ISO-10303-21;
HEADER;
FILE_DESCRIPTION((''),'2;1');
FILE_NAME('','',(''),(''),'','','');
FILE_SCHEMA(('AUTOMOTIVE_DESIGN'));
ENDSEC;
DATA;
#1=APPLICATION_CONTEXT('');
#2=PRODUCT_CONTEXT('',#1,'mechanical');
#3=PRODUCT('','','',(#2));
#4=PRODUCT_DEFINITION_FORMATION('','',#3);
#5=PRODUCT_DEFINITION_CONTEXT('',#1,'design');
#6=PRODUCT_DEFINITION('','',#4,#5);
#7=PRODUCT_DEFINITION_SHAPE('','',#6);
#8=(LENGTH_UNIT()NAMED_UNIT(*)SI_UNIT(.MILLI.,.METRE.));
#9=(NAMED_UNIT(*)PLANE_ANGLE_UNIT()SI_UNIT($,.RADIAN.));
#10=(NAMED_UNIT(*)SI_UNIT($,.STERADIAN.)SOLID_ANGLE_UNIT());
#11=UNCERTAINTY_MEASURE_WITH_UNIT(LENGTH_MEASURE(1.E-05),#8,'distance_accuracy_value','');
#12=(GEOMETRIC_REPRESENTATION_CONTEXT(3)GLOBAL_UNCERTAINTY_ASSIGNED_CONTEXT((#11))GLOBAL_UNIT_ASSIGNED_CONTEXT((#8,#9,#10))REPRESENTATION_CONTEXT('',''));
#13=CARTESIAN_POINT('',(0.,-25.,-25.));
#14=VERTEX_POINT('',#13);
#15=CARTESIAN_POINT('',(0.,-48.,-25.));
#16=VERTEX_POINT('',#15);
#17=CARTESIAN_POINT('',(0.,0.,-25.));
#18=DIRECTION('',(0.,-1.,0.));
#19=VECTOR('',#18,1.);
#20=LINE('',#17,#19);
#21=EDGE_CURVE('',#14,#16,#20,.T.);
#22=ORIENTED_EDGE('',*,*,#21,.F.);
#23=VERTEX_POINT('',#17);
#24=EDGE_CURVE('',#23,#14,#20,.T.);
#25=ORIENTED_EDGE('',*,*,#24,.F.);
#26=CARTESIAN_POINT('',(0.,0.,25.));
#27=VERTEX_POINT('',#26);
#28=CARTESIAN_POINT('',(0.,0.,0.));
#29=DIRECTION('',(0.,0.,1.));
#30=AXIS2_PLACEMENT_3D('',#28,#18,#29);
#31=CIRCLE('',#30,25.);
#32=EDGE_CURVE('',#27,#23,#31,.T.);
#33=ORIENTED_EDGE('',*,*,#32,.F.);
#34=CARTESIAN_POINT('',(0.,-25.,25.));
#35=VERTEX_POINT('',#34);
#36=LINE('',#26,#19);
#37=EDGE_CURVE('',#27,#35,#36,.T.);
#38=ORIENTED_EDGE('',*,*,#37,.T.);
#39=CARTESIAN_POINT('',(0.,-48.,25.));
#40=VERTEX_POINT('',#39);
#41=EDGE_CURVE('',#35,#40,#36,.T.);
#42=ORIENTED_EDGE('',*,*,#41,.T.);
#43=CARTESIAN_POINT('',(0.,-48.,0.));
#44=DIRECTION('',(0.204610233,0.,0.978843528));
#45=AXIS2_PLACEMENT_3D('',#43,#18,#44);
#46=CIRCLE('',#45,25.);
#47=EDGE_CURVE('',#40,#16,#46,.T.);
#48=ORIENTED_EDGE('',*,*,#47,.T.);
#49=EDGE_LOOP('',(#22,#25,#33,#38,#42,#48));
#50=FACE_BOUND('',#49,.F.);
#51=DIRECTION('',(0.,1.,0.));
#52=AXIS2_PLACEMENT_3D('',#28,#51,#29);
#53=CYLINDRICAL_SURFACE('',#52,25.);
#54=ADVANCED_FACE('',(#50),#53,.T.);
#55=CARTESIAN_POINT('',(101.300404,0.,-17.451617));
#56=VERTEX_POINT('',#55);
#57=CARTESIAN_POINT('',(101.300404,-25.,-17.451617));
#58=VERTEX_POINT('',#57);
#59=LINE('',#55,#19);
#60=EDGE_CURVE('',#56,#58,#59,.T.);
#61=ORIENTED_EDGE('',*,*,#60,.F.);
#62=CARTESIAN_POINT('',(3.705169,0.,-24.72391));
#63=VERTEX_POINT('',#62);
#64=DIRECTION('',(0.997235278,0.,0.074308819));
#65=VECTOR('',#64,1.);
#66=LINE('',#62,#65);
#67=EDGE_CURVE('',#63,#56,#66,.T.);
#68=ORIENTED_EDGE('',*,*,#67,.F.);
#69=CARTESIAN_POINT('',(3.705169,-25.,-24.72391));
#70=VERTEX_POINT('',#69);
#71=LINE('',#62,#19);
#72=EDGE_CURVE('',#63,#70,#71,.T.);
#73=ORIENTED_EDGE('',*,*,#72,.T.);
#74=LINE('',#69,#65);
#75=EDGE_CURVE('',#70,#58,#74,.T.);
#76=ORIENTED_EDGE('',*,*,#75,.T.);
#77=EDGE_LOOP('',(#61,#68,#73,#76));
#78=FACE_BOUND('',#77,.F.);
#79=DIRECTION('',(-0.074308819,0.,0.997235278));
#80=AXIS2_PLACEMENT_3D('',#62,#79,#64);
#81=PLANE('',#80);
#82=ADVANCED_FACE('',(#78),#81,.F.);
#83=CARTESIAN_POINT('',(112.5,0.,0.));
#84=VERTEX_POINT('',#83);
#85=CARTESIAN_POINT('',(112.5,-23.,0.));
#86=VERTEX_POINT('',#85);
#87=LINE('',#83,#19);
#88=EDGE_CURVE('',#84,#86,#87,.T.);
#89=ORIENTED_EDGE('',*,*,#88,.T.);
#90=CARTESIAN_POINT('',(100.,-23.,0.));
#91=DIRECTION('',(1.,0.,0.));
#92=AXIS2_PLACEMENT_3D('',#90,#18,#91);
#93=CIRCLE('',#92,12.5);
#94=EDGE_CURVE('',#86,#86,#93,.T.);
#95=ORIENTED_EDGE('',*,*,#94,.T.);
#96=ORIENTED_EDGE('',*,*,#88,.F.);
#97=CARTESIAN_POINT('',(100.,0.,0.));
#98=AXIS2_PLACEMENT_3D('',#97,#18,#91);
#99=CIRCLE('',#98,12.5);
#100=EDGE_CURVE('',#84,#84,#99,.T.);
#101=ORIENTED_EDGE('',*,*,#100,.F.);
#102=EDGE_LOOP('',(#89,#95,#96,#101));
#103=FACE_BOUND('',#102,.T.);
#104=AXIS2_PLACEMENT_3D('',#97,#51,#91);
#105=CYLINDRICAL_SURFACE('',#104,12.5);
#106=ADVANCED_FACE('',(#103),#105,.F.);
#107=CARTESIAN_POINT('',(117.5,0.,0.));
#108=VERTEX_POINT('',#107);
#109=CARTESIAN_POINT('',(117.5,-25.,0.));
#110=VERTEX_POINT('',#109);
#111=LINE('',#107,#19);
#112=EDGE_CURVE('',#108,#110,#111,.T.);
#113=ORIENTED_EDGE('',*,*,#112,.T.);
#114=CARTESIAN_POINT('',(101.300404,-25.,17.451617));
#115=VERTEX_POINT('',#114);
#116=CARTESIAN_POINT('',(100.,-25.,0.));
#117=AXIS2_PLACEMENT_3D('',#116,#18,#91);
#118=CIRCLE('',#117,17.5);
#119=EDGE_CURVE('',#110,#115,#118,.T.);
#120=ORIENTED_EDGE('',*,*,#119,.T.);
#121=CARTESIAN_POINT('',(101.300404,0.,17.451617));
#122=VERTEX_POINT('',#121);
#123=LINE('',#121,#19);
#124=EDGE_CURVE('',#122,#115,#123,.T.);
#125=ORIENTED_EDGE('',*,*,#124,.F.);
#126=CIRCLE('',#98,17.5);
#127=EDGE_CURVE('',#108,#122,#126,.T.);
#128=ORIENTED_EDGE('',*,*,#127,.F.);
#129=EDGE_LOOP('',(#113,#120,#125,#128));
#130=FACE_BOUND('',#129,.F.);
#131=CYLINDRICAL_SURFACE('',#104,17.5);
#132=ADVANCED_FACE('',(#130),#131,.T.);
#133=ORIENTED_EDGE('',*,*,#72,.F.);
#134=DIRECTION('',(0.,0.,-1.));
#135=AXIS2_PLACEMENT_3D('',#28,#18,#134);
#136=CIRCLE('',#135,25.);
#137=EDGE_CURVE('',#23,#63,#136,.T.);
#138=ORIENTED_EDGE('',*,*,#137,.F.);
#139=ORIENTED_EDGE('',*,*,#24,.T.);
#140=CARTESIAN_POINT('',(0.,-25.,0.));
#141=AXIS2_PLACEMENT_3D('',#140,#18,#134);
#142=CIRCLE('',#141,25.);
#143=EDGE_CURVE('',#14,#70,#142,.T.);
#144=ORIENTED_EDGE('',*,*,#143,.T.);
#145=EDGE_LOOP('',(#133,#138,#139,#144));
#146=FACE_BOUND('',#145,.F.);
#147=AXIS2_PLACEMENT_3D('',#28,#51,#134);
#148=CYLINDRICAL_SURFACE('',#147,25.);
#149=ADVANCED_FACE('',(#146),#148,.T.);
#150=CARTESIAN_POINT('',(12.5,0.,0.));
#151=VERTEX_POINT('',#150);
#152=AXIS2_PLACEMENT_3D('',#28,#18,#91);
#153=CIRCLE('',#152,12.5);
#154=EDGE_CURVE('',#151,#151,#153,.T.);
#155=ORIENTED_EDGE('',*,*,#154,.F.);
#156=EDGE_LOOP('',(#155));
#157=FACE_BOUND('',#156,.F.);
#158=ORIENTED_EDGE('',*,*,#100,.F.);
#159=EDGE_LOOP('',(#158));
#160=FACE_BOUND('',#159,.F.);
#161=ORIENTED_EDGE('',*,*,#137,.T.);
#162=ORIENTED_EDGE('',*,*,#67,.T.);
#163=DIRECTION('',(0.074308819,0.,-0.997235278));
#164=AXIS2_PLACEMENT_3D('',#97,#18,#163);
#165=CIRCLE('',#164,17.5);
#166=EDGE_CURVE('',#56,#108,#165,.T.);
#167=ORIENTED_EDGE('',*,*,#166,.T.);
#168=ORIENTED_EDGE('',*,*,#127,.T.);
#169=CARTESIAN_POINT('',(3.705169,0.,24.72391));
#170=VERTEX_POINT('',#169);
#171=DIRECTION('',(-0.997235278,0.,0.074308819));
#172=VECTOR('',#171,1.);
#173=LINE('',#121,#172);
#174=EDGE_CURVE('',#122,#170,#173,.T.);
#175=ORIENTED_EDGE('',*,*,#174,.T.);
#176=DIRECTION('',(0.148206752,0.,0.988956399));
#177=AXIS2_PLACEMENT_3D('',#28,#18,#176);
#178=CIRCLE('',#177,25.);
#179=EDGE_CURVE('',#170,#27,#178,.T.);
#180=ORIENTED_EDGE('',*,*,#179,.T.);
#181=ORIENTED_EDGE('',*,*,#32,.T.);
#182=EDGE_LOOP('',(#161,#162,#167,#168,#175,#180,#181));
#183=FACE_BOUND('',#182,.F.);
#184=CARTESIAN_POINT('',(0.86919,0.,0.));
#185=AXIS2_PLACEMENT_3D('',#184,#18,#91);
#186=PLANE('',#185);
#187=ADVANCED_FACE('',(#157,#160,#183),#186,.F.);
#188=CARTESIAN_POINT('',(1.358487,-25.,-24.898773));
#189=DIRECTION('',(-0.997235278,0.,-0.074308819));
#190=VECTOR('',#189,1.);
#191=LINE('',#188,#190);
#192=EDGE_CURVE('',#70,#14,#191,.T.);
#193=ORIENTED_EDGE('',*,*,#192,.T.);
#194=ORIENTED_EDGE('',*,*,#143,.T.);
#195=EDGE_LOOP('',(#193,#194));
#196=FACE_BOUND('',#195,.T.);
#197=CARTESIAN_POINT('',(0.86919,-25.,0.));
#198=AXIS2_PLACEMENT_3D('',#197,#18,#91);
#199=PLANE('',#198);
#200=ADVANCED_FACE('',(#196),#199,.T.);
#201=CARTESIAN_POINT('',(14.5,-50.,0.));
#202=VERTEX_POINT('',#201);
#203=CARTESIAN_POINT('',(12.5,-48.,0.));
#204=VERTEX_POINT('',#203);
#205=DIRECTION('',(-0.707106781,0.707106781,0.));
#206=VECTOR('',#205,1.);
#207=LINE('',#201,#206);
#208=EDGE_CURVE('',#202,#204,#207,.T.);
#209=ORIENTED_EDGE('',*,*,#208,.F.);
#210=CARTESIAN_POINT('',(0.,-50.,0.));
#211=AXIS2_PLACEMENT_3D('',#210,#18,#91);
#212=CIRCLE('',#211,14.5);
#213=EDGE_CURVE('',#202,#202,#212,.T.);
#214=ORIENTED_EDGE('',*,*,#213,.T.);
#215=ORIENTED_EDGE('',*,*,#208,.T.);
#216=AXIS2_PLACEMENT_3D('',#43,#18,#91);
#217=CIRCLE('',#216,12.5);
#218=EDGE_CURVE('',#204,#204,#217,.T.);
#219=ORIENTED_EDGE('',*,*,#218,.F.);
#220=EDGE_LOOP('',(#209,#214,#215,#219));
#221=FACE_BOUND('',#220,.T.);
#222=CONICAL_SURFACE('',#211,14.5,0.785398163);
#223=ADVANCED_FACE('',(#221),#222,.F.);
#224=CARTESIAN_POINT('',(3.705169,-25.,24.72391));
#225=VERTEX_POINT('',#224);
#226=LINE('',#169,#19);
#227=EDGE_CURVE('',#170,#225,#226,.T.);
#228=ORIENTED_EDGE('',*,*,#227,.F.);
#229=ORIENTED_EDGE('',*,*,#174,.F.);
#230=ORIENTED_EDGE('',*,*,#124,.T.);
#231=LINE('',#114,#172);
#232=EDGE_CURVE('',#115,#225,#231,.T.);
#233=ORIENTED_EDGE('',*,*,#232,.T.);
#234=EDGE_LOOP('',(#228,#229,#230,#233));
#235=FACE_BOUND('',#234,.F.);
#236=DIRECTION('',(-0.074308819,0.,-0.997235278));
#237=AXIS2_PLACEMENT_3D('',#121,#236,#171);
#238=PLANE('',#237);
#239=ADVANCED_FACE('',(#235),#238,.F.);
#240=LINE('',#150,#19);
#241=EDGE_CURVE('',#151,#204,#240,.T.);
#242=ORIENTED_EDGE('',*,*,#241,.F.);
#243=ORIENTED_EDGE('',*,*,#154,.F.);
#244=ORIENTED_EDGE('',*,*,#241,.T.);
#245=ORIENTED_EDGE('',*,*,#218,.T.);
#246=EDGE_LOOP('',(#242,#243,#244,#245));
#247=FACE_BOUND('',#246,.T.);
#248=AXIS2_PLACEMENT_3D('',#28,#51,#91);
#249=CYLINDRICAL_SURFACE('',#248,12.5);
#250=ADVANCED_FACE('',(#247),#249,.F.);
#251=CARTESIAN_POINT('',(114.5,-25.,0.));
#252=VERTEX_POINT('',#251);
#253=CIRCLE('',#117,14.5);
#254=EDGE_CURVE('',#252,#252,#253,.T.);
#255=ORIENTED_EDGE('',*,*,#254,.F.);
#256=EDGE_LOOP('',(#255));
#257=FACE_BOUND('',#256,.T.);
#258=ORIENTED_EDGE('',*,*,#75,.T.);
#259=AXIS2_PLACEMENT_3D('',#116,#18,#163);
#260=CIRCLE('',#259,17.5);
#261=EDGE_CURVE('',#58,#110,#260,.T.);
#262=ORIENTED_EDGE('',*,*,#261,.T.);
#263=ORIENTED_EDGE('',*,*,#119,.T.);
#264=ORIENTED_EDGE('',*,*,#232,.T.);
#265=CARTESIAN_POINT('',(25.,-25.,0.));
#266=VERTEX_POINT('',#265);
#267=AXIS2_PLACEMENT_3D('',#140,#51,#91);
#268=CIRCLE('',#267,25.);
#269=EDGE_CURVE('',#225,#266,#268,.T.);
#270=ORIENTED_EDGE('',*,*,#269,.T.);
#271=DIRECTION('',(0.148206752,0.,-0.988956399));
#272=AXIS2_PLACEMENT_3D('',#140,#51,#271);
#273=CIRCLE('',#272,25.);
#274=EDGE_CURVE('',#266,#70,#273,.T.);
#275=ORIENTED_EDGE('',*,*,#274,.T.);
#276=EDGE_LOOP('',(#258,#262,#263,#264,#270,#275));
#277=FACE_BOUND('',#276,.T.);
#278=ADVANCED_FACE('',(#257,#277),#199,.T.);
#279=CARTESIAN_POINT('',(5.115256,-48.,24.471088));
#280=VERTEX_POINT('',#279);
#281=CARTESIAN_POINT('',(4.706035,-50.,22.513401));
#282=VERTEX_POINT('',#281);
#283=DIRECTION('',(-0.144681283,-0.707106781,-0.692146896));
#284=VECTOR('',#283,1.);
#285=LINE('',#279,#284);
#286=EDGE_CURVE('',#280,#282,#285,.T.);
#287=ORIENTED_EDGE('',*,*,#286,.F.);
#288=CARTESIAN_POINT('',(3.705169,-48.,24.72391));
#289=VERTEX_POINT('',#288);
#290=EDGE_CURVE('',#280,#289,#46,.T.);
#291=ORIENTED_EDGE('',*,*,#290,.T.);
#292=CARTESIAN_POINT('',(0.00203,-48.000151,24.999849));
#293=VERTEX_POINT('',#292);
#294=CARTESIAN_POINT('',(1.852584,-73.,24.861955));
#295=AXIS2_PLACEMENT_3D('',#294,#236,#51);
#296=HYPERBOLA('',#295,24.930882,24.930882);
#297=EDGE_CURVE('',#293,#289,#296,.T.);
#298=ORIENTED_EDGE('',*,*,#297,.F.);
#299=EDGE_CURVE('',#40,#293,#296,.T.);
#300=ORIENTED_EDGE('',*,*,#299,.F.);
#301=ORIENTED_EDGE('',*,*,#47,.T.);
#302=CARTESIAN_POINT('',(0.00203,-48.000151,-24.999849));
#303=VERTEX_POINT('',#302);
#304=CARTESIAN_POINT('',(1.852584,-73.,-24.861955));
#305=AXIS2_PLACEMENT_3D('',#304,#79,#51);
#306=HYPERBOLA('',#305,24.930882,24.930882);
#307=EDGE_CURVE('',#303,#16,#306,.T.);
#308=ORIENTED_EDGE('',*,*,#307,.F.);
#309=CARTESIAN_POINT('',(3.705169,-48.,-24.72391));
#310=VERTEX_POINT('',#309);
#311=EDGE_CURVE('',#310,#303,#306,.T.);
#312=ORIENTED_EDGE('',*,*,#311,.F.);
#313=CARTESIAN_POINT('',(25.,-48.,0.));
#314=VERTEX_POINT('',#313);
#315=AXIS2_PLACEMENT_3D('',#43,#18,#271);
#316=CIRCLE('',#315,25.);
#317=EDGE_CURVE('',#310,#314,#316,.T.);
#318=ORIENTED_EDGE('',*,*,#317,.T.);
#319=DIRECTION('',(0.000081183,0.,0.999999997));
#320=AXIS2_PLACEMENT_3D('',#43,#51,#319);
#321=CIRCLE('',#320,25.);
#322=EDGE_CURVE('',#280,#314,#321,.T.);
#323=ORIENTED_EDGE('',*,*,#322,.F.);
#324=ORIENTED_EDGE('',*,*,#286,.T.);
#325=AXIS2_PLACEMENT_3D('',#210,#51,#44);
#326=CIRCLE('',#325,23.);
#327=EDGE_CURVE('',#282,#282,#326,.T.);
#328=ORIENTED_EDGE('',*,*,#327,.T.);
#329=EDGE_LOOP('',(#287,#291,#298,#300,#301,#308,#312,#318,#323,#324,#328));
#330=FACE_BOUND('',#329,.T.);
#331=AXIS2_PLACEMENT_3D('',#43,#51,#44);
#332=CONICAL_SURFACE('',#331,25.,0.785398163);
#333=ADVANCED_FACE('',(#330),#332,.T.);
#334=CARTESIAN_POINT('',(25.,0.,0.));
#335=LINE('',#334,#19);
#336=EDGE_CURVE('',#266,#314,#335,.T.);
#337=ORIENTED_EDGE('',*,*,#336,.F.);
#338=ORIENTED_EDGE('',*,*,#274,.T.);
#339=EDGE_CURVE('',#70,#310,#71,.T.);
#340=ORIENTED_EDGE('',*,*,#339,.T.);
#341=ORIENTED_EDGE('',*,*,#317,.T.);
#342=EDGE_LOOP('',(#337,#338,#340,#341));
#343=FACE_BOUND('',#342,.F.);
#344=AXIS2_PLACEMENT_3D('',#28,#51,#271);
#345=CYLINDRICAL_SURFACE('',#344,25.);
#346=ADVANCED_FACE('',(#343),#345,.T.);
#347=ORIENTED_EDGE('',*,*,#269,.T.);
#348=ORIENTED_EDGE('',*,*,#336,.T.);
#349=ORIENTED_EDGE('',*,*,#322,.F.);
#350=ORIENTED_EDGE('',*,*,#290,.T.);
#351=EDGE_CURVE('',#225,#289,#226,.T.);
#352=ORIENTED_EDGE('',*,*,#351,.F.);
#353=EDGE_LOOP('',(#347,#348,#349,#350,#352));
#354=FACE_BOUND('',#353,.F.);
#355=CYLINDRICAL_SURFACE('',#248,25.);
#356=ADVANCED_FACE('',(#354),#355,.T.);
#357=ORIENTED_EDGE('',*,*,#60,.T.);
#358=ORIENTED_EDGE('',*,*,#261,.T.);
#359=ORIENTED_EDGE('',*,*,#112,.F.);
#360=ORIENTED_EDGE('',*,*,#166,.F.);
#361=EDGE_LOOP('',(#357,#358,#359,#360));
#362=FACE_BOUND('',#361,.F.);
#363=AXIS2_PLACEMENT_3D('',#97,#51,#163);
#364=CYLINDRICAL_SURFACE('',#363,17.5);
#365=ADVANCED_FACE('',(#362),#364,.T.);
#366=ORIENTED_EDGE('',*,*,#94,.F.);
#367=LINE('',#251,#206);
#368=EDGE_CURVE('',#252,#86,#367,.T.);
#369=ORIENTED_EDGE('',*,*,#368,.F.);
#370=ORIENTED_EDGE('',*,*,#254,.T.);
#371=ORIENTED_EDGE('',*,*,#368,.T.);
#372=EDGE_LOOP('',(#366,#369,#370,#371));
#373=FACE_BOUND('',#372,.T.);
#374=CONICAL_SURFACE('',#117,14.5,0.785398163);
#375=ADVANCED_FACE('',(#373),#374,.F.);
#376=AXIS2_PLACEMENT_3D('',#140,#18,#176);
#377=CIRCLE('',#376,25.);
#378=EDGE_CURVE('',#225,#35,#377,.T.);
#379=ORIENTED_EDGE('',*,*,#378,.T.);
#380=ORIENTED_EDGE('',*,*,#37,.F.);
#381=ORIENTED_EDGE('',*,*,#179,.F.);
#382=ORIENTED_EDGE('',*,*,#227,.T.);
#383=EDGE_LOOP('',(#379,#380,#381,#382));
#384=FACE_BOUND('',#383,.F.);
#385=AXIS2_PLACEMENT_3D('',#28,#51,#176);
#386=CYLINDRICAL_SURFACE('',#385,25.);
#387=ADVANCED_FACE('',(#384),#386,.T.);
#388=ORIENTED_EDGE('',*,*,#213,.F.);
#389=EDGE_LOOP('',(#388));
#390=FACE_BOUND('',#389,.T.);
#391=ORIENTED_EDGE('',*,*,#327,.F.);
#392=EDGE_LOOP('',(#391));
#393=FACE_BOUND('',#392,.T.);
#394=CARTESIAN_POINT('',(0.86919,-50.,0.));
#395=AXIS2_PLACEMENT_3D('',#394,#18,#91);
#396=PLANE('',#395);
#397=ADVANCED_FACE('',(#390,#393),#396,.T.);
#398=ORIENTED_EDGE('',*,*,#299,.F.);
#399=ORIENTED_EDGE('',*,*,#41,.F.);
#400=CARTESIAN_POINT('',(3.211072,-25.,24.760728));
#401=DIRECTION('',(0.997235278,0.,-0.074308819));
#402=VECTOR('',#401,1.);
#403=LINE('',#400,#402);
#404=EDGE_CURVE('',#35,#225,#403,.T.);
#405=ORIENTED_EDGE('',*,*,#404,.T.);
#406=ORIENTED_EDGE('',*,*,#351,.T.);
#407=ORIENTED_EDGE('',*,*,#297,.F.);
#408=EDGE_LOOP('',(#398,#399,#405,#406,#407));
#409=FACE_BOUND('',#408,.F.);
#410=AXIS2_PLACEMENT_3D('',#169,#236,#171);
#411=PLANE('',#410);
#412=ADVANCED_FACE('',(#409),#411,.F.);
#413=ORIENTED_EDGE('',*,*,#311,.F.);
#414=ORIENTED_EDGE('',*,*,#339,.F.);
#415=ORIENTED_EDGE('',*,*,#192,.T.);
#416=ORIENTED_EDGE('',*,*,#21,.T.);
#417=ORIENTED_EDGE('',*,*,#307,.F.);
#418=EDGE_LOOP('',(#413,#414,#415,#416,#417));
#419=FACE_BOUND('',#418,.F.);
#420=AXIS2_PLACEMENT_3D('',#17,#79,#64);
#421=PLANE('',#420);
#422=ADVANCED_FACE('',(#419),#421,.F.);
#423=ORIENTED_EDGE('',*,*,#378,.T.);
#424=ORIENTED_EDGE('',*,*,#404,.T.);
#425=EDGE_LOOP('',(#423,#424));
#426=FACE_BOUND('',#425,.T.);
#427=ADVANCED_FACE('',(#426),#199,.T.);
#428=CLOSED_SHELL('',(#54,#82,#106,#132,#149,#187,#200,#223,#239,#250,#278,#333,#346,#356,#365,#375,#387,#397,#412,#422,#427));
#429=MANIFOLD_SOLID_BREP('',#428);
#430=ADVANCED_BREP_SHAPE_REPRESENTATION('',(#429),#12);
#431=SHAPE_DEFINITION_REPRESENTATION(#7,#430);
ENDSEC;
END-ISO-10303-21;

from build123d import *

# Parameters (mm, degrees)
F0_R        = 12.5
F1_DEPTH    = 25
F2_DEPTH    = 50
F3_T4_ANGLE = 203.6133668192
F3_T6_ANGLE = 179.9906971182


# Not quite as in the source:
# - a fillet or chamfer that OpenCascade refuses, or shapes differently, is made with other operations: its cross-section is extruded or revolved along the edge and cut away or added


with BuildPart() as f1:
    # F0 (on Front) → F1 (new body)
    with BuildSketch(Plane.XZ):
        with BuildLine():
            Line((3.7051688109, 24.7239099675), (0, 25))
            ThreePointArc((0, 25), (-25, 0), (0, -25))
            Line((0, -25), (3.7051688109, -24.7239099675))
            ThreePointArc((3.7051688109, -24.7239099675), (18.9424024383, -16.3151889313), (25, 0))
            ThreePointArc((25, 0), (18.9424024383, 16.3151889313), (3.7051688109, 24.7239099675))
        make_face()
        Circle(F0_R, mode=Mode.SUBTRACT)
        with BuildLine():
            ThreePointArc((3.7051688109, 24.7239099675), (1.8577204864, 24.9308819458), (0, 25))
            Line((0, 25), (3.7051688109, 24.7239099675))
        make_face()
        with BuildLine():
            Line((3.7051688109, -24.7239099675), (0, -25))
            ThreePointArc((0, -25), (1.8577204864, -24.9308819458), (3.7051688109, -24.7239099675))
        make_face()
        with BuildLine():
            Line((101.3004043405, 17.451617362), (3.7051688109, 24.7239099675))
            ThreePointArc((3.7051688109, 24.7239099675), (18.9424024383, 16.3151889313), (25, 0))
            ThreePointArc((25, 0), (18.9424024383, -16.3151889313), (3.7051688109, -24.7239099675))
            Line((3.7051688109, -24.7239099675), (101.3004043405, -17.451617362))
            ThreePointArc((101.3004043405, -17.451617362), (82.5, 0), (101.3004043405, 17.451617362))
        make_face()
        with BuildLine():
            ThreePointArc((117.5, 0), (112.8258932624, 11.9057323177), (101.3004043405, 17.451617362))
            ThreePointArc((101.3004043405, 17.451617362), (82.5, 0), (101.3004043405, -17.451617362))
            ThreePointArc((101.3004043405, -17.451617362), (112.8258932624, -11.9057323177), (117.5, 0))
        make_face()
        with Locations((100, 0)):
            Circle(F0_R, mode=Mode.SUBTRACT)
    extrude(amount=F1_DEPTH)

    # F0 (on Front) → F2 (join)
    with BuildSketch(Plane.XZ):
        with BuildLine():
            Line((3.7051688109, 24.7239099675), (0, 25))
            ThreePointArc((0, 25), (-25, 0), (0, -25))
            Line((0, -25), (3.7051688109, -24.7239099675))
            ThreePointArc((3.7051688109, -24.7239099675), (18.9424024383, -16.3151889313), (25, 0))
            ThreePointArc((25, 0), (18.9424024383, 16.3151889313), (3.7051688109, 24.7239099675))
        make_face()
        Circle(F0_R, mode=Mode.SUBTRACT)
    extrude(amount=F2_DEPTH)

    # F3: chamfer of 2 on 4 edges, made by hand

    # F3_s1 → F3_t2 (revolve, cut)
    with BuildSketch(Plane.XY):
        Polygon((14.5, -50), (12.5, -48), (12.5, -50), align=None)
    revolve(axis=Axis((0, -50, 0), (0, -1, 0)), mode=Mode.SUBTRACT)

    # F3_s3 → F3_t4 (revolve, cut)
    with BuildSketch(Plane(origin=(0, 0, 0), x_dir=(0, 1, 0), z_dir=(0.9788435281, 0, -0.2046102329))):
        Polygon((-48, 25), (-50, 23), (-50, 25), align=None)
    revolve(axis=Axis((0, -50, 0), (0, -1, 0)), revolution_arc=F3_T4_ANGLE, mode=Mode.SUBTRACT)

    # F3_s5 → F3_t6 (revolve, cut)
    with BuildSketch(Plane(origin=(0, 0, 0), x_dir=(0, 1, 0), z_dir=(-0.9999999967, 0, 8.1183e-05))):
        Polygon((-48, -25), (-50, -23), (-50, -25), align=None)
    revolve(axis=Axis((0, -50, 0), (0, 1, 0)), revolution_arc=F3_T6_ANGLE, mode=Mode.SUBTRACT)

    # F3_s7 → F3_t8 (revolve, cut)
    with BuildSketch(Plane.XY):
        Polygon((114.5, -25), (112.5, -23), (112.5, -25), align=None)
    revolve(axis=Axis((100, -25, 0), (0, -1, 0)), mode=Mode.SUBTRACT)


solid = f1.part
